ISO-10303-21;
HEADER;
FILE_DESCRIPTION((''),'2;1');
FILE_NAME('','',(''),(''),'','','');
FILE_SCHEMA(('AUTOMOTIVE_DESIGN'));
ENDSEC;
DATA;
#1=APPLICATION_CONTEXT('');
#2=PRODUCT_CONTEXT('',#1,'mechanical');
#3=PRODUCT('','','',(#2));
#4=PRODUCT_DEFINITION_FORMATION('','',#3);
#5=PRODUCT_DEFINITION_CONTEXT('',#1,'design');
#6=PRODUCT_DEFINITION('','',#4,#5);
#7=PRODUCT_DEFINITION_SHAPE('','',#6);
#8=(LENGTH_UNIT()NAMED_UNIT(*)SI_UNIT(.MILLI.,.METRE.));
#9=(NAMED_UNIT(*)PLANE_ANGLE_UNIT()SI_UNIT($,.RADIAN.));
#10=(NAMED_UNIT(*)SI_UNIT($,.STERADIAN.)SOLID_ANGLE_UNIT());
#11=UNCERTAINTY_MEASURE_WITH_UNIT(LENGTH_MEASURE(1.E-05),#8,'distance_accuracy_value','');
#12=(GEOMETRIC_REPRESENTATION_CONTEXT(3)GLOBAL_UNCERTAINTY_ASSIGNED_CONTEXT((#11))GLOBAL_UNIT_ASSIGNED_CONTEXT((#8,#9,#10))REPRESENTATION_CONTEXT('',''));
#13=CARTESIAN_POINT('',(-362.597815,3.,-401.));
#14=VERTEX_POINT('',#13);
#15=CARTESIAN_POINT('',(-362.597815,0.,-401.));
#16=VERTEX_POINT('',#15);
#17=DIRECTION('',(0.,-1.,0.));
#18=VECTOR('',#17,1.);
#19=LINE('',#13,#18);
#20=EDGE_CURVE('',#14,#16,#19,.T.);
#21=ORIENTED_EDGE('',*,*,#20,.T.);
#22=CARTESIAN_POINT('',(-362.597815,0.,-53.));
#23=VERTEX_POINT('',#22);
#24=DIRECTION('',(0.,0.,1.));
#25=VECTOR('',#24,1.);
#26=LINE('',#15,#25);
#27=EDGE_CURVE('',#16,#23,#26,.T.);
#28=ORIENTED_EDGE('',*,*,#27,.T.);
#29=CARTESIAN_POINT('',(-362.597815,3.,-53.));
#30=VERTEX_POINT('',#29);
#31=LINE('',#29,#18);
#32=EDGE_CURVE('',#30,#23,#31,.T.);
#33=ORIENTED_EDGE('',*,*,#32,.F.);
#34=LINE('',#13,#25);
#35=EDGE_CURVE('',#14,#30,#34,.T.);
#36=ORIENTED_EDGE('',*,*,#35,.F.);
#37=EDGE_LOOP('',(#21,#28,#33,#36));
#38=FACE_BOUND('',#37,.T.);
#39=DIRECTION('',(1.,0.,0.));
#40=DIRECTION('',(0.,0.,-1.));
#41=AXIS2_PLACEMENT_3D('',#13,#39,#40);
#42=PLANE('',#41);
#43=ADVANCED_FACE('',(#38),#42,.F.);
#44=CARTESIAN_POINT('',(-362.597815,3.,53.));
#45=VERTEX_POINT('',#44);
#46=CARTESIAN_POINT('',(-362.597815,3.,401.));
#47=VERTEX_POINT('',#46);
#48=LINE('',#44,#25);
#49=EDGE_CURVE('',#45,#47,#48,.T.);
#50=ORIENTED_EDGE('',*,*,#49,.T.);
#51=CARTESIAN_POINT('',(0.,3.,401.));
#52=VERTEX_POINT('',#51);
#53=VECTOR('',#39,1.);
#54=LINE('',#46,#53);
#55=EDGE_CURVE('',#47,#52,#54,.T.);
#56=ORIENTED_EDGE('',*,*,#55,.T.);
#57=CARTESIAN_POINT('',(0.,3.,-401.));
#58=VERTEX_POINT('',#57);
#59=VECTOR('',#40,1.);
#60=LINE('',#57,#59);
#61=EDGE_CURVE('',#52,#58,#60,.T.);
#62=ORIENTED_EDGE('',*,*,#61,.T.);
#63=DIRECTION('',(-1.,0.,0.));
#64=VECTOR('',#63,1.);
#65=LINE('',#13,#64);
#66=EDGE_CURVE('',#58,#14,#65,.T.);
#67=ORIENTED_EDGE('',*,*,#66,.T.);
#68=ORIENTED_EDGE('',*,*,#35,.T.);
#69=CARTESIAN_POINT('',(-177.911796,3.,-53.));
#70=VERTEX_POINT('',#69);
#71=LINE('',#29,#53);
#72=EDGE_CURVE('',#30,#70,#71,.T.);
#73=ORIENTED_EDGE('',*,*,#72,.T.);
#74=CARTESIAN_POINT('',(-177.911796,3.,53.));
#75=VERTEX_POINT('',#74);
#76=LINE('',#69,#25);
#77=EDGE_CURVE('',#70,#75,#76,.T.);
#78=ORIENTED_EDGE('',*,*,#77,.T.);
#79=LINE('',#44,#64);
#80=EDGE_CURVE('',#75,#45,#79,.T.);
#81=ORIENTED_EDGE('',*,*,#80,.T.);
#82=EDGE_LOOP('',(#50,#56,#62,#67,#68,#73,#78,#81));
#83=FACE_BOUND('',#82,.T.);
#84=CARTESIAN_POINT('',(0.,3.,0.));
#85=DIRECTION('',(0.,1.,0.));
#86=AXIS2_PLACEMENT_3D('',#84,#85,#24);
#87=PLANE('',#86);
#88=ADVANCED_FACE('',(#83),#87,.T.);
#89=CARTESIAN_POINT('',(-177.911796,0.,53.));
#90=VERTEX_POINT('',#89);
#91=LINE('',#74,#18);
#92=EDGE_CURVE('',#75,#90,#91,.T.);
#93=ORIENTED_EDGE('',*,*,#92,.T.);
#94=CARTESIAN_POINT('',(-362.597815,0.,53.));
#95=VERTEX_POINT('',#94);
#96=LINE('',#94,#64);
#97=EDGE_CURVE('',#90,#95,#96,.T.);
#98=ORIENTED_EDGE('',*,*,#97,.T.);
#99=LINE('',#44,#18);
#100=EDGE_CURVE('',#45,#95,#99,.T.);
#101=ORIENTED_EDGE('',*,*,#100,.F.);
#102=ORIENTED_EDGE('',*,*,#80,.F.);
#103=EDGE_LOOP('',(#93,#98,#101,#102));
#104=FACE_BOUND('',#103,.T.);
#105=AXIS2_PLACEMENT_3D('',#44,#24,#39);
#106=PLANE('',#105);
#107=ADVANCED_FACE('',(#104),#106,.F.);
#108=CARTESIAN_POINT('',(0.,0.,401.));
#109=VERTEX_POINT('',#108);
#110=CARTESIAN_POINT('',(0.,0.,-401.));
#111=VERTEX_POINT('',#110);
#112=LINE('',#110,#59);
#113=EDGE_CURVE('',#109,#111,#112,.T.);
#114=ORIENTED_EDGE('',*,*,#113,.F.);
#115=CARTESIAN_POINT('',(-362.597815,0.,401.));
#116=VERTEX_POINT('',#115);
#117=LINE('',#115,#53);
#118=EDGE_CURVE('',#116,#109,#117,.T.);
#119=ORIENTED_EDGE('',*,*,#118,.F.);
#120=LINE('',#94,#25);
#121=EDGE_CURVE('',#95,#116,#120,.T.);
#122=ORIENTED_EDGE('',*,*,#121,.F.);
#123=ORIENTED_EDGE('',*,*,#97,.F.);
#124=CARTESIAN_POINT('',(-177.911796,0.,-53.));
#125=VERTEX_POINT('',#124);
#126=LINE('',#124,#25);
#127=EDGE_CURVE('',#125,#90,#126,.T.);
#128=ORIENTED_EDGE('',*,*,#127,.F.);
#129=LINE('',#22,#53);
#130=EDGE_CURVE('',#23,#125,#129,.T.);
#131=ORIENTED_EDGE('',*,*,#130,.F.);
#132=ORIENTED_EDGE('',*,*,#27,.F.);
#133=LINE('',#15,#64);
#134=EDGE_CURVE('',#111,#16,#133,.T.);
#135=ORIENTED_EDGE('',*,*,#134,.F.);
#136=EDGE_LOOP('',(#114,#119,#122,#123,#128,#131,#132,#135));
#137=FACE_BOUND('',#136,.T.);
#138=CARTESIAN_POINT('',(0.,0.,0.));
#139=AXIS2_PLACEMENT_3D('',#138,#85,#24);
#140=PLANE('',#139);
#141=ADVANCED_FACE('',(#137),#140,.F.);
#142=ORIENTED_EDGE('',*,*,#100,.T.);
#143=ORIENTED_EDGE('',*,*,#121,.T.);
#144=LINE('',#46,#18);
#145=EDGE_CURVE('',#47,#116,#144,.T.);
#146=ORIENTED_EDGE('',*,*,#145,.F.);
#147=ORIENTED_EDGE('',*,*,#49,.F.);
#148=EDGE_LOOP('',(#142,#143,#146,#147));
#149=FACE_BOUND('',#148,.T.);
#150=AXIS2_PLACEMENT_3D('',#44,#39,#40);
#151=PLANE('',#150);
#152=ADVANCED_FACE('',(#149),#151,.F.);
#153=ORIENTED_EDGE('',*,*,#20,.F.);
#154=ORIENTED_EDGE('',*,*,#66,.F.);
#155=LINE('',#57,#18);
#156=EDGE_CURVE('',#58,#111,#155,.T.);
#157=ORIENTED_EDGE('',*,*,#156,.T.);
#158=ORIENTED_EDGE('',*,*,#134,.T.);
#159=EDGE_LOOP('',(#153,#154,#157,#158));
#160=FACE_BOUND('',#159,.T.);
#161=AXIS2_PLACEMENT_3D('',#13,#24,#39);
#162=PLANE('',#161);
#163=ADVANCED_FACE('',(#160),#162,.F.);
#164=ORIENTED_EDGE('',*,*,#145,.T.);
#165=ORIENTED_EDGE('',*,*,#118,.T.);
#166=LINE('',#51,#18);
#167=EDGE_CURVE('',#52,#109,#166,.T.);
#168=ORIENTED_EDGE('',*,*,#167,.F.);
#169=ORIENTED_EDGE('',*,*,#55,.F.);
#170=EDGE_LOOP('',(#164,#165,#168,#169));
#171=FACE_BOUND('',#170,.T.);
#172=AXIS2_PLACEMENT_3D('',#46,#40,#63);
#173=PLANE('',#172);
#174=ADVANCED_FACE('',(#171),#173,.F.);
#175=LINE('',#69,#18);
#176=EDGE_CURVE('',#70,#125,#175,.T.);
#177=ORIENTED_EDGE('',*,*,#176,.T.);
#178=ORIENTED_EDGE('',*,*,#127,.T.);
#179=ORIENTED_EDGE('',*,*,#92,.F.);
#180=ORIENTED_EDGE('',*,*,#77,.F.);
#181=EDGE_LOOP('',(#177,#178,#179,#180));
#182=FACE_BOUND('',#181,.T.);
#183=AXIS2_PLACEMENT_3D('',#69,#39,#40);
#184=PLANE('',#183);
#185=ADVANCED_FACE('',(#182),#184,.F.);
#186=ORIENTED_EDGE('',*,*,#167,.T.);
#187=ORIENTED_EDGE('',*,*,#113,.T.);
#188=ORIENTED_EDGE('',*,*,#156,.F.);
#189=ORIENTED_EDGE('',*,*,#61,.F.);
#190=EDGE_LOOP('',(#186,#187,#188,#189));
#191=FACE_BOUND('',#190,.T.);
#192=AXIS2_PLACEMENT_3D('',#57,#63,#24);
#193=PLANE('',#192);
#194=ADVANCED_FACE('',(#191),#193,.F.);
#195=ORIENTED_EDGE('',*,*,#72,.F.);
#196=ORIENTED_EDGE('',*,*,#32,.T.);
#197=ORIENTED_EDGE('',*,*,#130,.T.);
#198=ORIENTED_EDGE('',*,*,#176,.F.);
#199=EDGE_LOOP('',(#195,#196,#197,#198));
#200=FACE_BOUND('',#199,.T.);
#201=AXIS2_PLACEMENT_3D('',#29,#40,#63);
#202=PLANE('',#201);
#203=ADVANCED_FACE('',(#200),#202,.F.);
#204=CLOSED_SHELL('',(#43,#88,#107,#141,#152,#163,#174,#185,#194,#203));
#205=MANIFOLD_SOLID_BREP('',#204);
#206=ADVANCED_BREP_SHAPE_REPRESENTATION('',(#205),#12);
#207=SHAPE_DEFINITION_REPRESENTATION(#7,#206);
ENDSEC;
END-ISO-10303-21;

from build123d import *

# Parameters (mm, degrees)
SM_BASE_FLANGE_1_DEPTH = 3


# Sheet-metal steps are written as plain solids
with BuildPart() as part:
    # Эскиз3 → Базовая кромка1 (new body)
    with BuildSketch(Plane(origin=(-357.172117652, 0, 0), x_dir=(1, 0, 0), z_dir=(0, 1, 0))):
        Polygon((-5.425697168, 401), (357.172117652, 401), (357.172117652, -401), (-5.425697168, -401), (-5.425697168, -53), (179.2603216, -53), (179.2603216, 53), (-5.425697168, 53), align=None)
    extrude(amount=SM_BASE_FLANGE_1_DEPTH)


solid = part.part
